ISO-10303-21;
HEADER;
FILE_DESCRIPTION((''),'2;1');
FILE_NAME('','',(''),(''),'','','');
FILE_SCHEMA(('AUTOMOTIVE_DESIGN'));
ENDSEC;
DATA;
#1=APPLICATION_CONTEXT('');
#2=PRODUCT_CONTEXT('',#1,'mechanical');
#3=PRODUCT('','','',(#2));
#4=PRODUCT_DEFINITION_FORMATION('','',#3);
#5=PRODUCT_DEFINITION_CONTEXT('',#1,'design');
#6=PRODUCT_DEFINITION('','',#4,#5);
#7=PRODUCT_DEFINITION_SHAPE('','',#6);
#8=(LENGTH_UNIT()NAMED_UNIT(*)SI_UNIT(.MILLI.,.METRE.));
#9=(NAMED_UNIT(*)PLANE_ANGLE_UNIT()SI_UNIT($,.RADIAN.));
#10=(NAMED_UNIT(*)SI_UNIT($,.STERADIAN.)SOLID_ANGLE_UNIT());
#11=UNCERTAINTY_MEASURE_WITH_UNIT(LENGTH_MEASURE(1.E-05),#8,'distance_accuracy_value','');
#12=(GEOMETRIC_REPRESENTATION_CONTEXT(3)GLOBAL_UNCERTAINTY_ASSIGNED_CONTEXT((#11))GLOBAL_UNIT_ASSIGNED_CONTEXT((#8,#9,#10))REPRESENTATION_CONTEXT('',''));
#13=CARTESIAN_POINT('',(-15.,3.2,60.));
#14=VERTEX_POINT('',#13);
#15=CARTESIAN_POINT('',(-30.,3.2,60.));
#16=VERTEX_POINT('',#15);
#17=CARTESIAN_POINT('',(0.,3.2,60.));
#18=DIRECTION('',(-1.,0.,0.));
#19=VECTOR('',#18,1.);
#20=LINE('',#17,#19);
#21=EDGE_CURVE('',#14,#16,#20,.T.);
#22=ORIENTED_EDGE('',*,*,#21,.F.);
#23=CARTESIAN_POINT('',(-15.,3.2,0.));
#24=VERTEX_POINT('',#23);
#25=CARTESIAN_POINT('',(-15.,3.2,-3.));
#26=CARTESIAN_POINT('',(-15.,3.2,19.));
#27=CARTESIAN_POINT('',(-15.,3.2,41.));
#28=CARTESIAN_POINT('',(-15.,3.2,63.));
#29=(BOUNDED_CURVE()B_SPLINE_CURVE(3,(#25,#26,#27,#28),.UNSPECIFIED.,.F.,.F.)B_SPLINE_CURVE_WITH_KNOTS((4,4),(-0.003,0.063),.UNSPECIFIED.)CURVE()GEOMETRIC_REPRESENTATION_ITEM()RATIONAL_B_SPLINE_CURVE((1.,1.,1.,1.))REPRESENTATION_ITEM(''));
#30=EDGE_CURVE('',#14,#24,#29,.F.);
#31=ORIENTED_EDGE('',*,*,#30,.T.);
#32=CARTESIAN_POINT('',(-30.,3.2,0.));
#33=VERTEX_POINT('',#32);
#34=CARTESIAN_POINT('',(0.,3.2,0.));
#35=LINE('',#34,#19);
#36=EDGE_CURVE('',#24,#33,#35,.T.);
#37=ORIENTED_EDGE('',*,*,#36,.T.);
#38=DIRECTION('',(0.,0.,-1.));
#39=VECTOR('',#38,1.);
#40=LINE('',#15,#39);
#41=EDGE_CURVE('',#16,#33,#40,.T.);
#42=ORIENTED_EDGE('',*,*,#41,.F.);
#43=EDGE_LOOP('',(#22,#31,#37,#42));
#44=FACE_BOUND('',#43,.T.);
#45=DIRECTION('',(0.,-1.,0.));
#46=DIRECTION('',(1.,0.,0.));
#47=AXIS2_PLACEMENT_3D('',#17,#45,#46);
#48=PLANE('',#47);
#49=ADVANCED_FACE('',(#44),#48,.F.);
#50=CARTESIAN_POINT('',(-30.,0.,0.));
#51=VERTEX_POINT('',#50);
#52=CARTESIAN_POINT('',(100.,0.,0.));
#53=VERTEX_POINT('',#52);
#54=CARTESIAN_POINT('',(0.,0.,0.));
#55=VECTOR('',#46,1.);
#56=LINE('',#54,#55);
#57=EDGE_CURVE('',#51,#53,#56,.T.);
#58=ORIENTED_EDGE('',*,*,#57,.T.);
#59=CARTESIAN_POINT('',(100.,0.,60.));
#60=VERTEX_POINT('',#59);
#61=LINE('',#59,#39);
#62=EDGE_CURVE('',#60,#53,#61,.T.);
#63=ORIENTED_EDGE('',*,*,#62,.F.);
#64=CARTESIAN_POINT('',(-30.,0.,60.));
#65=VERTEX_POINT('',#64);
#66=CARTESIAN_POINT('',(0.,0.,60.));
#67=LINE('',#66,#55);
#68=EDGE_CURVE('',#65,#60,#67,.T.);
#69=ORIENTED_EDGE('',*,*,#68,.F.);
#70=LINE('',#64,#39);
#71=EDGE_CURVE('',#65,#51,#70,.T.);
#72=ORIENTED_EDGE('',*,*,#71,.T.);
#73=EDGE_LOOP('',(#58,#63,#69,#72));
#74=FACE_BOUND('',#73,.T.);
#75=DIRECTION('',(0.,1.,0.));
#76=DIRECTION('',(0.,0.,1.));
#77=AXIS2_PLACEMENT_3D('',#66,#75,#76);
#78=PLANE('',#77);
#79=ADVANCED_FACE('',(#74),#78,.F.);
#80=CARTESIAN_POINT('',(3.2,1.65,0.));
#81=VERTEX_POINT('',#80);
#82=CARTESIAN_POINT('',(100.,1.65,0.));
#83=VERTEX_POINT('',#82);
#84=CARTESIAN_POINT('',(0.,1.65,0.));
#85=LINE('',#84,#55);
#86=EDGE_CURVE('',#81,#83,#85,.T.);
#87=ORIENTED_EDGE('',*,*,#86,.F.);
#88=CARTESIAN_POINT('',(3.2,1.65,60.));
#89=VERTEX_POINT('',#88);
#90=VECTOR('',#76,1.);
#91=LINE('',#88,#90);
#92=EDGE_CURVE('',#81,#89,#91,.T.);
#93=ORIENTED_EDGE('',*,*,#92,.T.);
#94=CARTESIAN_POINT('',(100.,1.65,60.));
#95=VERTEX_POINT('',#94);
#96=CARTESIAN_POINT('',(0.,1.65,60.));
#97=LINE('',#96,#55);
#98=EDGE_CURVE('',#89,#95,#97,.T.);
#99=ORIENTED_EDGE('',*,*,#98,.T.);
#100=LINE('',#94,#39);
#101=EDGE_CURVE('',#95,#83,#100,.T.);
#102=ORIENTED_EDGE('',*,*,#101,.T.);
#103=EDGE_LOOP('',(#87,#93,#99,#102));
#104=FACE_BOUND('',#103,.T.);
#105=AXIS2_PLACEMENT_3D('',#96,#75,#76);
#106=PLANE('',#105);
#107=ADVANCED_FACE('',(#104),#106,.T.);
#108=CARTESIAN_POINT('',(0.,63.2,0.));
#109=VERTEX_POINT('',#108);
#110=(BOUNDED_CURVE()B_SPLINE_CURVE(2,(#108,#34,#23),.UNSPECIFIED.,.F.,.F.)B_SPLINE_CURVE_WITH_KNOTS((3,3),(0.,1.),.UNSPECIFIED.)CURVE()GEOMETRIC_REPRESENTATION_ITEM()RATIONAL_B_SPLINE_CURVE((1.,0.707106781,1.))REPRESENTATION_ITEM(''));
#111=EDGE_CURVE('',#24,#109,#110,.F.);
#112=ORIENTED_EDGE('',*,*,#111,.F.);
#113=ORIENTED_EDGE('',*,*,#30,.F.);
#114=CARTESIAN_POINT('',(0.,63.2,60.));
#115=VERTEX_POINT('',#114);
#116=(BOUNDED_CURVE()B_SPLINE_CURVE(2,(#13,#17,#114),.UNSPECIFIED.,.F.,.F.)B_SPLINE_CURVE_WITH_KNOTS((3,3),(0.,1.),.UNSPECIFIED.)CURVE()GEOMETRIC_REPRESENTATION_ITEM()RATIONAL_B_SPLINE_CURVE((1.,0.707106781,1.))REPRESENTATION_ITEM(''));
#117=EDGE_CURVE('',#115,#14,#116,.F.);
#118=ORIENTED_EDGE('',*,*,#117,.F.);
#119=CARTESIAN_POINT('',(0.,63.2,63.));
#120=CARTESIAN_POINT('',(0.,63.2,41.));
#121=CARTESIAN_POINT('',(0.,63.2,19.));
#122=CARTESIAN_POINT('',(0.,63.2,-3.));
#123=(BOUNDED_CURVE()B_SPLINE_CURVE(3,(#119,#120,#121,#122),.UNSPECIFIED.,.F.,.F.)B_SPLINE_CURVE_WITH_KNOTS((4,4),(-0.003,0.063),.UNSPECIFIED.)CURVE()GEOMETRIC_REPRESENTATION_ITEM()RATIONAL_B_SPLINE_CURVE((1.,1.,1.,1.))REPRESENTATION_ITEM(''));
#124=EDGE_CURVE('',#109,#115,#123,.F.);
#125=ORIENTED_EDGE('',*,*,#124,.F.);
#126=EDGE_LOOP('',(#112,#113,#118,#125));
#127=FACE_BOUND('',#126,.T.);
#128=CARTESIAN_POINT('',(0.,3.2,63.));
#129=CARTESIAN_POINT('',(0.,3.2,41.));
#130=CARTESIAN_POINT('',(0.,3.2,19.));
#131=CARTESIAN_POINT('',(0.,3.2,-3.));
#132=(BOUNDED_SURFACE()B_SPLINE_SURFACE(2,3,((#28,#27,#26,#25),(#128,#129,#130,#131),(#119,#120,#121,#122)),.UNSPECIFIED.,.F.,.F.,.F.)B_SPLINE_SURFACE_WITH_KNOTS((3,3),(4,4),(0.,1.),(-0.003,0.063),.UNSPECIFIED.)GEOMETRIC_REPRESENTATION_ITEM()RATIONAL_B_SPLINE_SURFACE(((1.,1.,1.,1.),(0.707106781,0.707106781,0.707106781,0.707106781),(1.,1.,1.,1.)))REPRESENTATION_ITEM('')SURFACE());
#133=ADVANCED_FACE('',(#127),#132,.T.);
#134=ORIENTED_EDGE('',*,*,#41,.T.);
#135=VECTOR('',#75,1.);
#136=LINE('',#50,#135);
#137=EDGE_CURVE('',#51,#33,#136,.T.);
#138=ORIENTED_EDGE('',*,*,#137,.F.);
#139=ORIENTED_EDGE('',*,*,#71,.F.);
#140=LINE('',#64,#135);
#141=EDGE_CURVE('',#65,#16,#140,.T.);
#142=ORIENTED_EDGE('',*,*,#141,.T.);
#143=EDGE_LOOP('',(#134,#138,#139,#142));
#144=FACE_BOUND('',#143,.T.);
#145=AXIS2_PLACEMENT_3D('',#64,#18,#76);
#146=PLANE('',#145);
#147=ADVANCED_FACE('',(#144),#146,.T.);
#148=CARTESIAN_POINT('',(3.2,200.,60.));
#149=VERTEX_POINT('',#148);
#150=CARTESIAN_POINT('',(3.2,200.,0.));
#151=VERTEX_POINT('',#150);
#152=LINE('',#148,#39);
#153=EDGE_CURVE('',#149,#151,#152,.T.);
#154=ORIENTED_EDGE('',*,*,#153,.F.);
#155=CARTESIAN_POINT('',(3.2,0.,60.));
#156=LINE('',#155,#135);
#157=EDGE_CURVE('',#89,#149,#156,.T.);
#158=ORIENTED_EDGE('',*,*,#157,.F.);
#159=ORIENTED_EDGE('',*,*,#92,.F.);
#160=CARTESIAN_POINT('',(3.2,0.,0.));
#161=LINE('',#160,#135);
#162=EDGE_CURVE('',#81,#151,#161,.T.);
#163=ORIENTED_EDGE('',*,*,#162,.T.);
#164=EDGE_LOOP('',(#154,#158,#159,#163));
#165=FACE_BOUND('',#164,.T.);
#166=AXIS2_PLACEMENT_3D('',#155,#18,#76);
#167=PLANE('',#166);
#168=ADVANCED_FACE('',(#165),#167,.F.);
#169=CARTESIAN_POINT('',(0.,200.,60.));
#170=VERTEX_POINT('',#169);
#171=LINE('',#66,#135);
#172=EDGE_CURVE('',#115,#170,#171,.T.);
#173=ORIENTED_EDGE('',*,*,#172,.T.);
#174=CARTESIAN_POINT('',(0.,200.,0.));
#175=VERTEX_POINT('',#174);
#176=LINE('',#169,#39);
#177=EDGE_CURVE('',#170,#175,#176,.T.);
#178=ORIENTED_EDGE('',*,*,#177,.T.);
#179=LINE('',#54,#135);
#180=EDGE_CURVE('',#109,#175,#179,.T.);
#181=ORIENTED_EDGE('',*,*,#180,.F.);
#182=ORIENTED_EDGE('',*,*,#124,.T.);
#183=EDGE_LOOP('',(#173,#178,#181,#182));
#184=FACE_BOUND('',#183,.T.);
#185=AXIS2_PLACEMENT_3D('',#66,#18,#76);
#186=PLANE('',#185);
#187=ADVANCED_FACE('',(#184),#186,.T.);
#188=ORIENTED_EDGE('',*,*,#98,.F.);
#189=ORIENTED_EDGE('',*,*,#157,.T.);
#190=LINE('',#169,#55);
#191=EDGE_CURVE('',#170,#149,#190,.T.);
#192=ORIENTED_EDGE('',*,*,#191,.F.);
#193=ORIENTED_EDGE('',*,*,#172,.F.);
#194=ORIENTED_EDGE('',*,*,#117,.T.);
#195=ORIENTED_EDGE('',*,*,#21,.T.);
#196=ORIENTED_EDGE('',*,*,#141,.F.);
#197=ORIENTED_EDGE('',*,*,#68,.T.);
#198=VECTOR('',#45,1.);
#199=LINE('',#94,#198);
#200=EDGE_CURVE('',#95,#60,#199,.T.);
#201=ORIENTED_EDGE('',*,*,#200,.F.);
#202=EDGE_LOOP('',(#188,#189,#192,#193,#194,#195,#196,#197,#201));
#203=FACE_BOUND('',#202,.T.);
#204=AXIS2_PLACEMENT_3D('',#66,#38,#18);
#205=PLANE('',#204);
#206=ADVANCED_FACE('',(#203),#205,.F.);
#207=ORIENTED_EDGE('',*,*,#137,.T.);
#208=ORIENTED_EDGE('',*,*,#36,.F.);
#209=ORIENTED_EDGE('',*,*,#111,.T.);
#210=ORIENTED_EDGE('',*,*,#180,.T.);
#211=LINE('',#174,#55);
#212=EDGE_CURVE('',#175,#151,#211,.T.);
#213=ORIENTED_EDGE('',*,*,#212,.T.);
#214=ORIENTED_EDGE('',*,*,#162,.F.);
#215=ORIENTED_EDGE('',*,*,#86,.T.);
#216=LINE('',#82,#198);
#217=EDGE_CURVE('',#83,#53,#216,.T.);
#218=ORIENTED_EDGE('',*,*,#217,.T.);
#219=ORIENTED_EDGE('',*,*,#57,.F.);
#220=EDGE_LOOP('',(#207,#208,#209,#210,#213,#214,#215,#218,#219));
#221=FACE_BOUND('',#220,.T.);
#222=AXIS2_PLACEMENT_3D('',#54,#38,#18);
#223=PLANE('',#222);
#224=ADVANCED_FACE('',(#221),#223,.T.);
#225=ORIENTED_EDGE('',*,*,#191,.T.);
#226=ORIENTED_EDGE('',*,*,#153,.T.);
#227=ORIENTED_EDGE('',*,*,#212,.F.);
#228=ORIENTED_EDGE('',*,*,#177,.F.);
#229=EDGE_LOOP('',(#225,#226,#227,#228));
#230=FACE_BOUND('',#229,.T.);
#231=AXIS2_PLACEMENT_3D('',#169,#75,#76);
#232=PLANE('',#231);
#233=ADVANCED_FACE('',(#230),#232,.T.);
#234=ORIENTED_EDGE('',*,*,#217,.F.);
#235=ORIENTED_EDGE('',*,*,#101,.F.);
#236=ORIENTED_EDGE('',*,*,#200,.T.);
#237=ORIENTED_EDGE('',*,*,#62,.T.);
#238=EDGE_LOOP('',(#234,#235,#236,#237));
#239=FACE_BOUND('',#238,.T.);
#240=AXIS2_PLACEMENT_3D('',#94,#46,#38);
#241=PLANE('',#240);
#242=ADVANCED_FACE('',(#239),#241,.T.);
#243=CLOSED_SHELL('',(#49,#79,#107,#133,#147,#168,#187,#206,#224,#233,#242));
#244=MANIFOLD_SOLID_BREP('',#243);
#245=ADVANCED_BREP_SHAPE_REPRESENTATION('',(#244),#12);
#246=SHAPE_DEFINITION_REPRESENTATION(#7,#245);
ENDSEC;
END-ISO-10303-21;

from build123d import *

# Parameters (mm, degrees)
ESQUISSE1_W        = 100
ESQUISSE1_H        = 1.65
EXTRU_MINCE1_DEPTH = 60
EXTRU_MINCE2_DEPTH = 60
CONG_1_SIZE        = 15
CONG_1_SIZE_2      = 60


# Read off the part's stored shape, not the designer's step: Extru.-Mince2
with BuildPart() as part:
    # Esquisse1 → Extru.-Mince1 (new body)
    with BuildSketch(Plane.XY):
        with Locations((50, 0.825)):
            Rectangle(ESQUISSE1_W, ESQUISSE1_H)
    extrude(amount=EXTRU_MINCE1_DEPTH)

    # Extru.-Mince2 outline → Extru.-Mince2 (add)
    with BuildSketch(Plane.XY):
        Polygon((-30, 0), (0, 0), (0, 1.65), (3.2, 1.65), (3.2, 200), (0, 200), (0, 3.2), (-30, 3.2), align=None)
    extrude(amount=EXTRU_MINCE2_DEPTH)

    # Congé1
    # an asymmetric fillet: 60, 15 mm, written as the material it adds along each edge
    with BuildSketch(Plane(origin=(0, 3.2, 0), x_dir=(-1, 0, 0), z_dir=(0, 0, 1))) as cong_1_piece_1:
        with BuildLine():
            Bezier((CONG_1_SIZE, 0), (0, 0), (0, -CONG_1_SIZE_2), weights=[1, 0.707106781, 1])
            Line((0, -CONG_1_SIZE_2), (0, 0))
            Line((0, 0), (CONG_1_SIZE, 0))
        make_face()
    extrude(amount=60)


solid = part.part
